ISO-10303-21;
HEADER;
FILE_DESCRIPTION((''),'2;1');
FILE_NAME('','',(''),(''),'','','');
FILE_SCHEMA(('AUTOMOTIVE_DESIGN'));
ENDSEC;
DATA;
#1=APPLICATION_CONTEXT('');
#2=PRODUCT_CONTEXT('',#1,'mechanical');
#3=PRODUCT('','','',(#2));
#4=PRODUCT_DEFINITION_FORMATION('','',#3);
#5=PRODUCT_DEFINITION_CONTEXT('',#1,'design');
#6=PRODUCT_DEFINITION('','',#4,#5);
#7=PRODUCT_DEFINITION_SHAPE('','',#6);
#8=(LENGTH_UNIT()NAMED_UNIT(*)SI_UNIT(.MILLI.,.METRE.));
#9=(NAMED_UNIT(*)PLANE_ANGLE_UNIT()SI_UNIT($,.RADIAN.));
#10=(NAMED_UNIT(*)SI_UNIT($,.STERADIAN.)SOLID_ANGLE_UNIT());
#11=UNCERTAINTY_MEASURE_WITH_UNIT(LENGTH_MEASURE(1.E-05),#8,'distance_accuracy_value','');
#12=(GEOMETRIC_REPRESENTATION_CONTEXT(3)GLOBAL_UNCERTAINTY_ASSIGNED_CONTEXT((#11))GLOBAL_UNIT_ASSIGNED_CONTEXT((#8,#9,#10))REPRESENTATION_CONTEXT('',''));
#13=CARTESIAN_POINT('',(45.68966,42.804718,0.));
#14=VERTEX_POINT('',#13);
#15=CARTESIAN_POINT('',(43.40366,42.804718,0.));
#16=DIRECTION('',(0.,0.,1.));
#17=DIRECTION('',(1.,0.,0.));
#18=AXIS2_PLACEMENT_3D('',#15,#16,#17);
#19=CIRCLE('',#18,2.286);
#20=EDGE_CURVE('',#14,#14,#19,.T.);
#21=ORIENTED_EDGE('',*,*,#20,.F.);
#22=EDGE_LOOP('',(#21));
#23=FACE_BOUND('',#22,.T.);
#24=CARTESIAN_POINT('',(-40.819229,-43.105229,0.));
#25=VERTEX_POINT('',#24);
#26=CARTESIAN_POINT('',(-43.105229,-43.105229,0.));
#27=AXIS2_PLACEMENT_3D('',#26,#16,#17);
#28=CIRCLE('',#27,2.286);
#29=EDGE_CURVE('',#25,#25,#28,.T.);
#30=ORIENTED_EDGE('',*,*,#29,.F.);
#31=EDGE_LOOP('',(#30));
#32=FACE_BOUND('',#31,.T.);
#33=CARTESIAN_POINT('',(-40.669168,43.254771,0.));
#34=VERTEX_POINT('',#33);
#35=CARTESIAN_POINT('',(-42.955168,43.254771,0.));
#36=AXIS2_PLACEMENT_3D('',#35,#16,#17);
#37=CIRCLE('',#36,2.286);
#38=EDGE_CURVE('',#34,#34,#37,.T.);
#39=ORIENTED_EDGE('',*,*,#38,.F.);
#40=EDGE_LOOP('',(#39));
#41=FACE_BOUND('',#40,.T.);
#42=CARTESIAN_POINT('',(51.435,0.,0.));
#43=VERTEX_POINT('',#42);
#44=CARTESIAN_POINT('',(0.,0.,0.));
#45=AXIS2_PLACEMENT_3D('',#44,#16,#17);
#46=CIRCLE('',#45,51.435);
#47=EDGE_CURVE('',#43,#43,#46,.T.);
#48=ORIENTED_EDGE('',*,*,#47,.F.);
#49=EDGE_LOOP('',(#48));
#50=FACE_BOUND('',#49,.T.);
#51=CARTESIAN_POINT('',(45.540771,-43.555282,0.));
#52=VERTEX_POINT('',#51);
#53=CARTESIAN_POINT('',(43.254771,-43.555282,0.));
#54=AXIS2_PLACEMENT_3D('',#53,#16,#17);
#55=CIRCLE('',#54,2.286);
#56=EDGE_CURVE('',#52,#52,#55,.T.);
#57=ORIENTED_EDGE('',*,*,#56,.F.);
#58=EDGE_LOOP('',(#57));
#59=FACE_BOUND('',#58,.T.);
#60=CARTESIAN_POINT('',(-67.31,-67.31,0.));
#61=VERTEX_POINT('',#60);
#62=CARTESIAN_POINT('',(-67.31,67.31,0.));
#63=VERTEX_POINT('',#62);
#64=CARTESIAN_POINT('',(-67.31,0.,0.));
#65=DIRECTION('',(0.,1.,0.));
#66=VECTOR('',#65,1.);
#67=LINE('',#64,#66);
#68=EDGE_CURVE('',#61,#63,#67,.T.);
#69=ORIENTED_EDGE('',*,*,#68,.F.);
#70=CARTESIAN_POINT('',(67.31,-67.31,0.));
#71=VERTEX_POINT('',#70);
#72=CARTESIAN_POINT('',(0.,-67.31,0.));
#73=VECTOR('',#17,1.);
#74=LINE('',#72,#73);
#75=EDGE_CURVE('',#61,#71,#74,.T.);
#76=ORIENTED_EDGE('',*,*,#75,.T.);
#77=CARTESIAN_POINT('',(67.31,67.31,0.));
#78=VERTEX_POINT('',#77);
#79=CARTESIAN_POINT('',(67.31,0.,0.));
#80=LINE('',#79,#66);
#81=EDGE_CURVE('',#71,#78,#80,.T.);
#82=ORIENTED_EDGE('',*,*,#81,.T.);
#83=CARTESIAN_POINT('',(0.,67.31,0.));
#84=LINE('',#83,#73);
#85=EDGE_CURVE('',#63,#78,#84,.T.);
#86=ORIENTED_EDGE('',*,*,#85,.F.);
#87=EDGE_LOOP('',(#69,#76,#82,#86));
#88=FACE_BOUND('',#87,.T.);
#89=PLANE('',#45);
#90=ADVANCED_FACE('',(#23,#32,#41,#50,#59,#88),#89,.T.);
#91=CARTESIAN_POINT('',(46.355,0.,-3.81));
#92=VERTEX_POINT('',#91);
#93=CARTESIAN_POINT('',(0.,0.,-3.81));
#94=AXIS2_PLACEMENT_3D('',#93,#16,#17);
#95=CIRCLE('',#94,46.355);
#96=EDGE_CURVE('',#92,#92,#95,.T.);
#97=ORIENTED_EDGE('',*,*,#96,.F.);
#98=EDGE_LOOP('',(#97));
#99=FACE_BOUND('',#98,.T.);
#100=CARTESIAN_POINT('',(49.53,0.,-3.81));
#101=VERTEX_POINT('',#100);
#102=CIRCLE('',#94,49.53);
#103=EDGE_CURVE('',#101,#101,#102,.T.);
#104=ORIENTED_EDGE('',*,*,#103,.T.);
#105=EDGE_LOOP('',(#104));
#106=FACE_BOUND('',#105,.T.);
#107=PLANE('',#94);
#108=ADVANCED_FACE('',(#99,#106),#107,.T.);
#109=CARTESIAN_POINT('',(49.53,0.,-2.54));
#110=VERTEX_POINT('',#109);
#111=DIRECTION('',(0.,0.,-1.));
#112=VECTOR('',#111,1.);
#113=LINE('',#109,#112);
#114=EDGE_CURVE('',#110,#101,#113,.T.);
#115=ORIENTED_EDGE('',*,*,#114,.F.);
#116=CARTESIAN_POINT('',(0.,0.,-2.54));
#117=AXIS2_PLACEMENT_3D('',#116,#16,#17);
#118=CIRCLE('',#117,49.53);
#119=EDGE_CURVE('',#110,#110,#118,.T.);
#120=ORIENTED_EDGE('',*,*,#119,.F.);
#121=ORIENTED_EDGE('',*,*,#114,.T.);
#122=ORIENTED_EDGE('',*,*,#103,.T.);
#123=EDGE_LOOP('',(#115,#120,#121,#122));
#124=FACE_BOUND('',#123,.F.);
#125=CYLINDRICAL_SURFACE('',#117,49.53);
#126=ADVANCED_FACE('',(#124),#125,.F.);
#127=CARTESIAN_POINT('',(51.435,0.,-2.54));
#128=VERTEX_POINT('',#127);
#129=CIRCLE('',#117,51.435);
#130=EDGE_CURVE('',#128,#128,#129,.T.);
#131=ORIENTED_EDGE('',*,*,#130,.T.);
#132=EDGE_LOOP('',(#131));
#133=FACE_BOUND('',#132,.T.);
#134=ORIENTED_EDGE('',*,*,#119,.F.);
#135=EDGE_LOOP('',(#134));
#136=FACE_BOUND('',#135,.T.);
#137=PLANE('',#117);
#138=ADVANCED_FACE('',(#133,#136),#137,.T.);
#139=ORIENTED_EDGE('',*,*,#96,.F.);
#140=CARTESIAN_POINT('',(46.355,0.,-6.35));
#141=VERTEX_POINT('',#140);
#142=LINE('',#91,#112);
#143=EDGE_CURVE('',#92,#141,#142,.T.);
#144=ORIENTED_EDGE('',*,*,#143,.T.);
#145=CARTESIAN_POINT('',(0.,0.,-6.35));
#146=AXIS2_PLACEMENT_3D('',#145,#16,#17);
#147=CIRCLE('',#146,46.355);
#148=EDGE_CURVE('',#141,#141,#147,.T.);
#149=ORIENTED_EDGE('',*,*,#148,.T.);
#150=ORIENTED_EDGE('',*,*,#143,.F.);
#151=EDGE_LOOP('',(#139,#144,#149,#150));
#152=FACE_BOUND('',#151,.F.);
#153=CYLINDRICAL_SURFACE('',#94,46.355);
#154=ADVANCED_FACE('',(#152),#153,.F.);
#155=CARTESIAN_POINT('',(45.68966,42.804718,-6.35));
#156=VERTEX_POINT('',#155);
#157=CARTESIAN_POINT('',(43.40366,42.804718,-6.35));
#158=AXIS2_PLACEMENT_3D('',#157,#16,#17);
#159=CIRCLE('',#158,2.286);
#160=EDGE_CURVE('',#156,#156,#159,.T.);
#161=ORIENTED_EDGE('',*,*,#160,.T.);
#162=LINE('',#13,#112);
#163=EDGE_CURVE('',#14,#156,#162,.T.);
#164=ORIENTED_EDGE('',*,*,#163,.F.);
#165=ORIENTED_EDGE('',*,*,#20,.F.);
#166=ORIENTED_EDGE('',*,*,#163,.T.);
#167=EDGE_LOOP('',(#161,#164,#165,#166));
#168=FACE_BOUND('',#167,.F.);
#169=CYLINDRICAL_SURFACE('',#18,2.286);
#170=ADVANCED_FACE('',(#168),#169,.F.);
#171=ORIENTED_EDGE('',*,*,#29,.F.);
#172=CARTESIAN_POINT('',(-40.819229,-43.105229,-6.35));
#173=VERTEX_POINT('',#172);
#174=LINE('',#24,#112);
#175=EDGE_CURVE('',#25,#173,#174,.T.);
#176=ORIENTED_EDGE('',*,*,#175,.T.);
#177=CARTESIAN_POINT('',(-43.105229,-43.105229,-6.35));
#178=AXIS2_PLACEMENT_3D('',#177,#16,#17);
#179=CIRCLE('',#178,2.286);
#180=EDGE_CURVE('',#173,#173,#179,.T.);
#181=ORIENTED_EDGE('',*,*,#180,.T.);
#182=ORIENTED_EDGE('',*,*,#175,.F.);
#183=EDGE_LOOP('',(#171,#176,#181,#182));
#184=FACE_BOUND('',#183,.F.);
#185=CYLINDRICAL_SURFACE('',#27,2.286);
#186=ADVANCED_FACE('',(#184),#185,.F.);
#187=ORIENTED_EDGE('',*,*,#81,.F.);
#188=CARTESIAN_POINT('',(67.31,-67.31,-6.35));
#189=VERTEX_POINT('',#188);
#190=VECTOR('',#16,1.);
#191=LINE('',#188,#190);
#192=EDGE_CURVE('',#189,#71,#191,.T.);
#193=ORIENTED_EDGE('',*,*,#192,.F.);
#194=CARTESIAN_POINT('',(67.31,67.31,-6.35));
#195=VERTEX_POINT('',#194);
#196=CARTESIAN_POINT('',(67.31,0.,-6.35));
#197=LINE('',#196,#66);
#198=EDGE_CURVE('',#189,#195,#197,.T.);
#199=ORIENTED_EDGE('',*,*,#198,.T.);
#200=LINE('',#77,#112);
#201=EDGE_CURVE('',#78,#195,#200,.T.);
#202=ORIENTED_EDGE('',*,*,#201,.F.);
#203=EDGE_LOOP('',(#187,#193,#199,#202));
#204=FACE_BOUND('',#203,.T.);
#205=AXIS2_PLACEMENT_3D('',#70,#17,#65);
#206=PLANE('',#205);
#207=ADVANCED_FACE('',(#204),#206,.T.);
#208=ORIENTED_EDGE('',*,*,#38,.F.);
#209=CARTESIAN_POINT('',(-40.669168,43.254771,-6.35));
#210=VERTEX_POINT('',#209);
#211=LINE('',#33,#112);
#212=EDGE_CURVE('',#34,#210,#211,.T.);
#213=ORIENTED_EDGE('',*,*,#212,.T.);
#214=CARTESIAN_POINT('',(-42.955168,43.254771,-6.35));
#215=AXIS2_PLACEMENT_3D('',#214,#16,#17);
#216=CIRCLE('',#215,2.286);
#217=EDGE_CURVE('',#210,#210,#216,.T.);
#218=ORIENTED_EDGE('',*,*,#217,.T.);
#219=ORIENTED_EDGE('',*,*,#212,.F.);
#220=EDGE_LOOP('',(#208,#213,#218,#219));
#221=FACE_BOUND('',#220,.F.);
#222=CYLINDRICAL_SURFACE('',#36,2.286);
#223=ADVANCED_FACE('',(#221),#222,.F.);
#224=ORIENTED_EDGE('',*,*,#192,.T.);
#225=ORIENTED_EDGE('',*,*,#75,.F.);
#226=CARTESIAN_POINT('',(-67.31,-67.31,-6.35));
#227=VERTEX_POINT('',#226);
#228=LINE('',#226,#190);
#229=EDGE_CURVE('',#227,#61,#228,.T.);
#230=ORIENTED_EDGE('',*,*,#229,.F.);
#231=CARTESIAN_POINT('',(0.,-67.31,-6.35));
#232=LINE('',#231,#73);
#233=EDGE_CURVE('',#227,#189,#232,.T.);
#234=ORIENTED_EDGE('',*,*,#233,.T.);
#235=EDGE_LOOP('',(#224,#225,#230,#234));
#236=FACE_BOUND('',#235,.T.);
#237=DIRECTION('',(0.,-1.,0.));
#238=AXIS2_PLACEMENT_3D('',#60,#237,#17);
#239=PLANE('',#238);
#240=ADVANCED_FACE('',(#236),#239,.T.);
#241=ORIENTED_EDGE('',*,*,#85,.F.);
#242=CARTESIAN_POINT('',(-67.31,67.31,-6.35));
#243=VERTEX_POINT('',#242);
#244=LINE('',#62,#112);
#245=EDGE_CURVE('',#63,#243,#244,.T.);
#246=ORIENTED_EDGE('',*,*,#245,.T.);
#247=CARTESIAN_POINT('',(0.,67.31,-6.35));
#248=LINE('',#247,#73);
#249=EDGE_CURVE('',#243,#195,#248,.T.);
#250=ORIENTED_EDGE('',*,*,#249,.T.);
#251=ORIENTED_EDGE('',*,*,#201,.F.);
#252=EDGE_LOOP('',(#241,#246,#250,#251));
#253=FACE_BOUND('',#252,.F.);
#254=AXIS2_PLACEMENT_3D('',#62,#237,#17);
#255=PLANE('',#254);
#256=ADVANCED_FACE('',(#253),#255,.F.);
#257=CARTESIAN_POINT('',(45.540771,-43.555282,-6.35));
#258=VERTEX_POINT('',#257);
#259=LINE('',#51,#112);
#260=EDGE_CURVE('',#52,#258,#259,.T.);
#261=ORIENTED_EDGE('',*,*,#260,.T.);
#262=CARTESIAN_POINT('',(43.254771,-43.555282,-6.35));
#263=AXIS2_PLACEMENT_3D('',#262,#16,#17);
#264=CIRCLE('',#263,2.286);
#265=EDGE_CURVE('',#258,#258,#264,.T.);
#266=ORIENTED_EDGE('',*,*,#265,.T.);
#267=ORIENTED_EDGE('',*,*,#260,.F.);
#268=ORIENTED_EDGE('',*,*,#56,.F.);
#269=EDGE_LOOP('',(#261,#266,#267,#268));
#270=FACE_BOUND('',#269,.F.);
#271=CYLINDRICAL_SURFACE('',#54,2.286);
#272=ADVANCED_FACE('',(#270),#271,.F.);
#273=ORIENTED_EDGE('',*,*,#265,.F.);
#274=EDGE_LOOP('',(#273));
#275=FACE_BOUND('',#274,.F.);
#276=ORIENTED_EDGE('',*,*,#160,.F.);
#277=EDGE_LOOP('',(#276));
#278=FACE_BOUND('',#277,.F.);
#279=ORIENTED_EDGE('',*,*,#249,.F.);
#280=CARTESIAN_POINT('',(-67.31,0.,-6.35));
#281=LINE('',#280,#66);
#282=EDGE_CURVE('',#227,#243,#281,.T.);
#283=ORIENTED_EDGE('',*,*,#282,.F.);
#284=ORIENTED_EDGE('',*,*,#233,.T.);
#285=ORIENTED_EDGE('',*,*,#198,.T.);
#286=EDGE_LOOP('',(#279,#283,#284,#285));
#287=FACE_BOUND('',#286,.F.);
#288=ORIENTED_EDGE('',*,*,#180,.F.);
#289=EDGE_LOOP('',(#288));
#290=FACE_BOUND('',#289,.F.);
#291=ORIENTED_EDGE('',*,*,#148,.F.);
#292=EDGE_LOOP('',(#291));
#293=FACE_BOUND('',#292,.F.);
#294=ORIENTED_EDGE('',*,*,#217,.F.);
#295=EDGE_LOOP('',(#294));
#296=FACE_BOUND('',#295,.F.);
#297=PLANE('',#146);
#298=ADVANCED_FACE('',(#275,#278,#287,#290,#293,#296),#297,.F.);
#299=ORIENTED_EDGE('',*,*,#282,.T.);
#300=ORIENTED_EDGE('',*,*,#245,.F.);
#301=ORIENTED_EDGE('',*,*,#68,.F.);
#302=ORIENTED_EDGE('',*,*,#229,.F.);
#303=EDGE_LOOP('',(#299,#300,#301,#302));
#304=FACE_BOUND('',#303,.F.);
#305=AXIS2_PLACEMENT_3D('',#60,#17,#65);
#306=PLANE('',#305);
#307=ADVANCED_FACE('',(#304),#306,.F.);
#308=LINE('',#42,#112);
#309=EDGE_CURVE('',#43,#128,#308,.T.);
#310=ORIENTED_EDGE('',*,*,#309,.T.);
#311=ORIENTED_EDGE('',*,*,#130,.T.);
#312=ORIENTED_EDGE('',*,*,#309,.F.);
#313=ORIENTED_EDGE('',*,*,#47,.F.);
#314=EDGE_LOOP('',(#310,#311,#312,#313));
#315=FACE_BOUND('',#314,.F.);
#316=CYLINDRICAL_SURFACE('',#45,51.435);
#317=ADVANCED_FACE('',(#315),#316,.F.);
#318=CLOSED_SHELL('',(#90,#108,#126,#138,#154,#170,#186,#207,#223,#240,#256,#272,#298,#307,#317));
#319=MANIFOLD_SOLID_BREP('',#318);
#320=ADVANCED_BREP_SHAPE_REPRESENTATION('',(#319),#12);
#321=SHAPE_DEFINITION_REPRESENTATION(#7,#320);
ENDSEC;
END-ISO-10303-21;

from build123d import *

# Parameters (mm, degrees)
F0_W     = 134.62
F0_H     = 134.62
F0_R     = 2.286
F0_R_2   = 51.435
F4_DEPTH = 6.35
F2_W     = 134.62
F2_H     = 134.62
F2_R     = 2.286
F2_R_2   = 49.53
F7_DEPTH = 3.81
F6_W     = 134.62
F6_H     = 134.62
F6_R     = 2.286
F6_R_2   = 46.355
F8_DEPTH = 2.54


# Not quite as in the source:
# - the program builds the solid bodies; features that only make, move or delete a surface that nothing else refers to are left out


with BuildPart() as f4:
    # F0 (on Top) → F4 (new body)
    with BuildSketch(Plane.XY):
        Rectangle(F0_W, F0_H)
        with Locations((-43.1052293811, -43.1052293811)):
            Circle(F0_R, mode=Mode.SUBTRACT)
        with Locations((43.2547706189, -43.5552815736)):
            Circle(F0_R, mode=Mode.SUBTRACT)
        with Locations((-42.9551675437, 43.2547706189)):
            Circle(F0_R, mode=Mode.SUBTRACT)
        Circle(F0_R_2, mode=Mode.SUBTRACT)
        with Locations((43.4036597586, 42.8047184264)):
            Circle(F0_R, mode=Mode.SUBTRACT)
    extrude(amount=-F4_DEPTH)

    # F2 (on offset) → F7 (join)
    with BuildSketch(Plane.XY.offset(-2.54)):
        Rectangle(F2_W, F2_H)
        with Locations((-43.1052293811, -43.1052293811)):
            Circle(F2_R, mode=Mode.SUBTRACT)
        with Locations((43.2547706189, -43.5552815736)):
            Circle(F2_R, mode=Mode.SUBTRACT)
        with Locations((-42.9551675437, 43.2547706189)):
            Circle(F2_R, mode=Mode.SUBTRACT)
        Circle(F2_R_2, mode=Mode.SUBTRACT)
        with Locations((43.4036597586, 42.8047184264)):
            Circle(F2_R, mode=Mode.SUBTRACT)
    extrude(amount=-F7_DEPTH)

    # F6 (on offset) → F8 (join)
    with BuildSketch(Plane.XY.offset(-3.81)):
        Rectangle(F6_W, F6_H)
        with Locations((-43.1052293811, -43.1052293811)):
            Circle(F6_R, mode=Mode.SUBTRACT)
        with Locations((43.2547706189, -43.5552815736)):
            Circle(F6_R, mode=Mode.SUBTRACT)
        with Locations((-42.9551675437, 43.2547706189)):
            Circle(F6_R, mode=Mode.SUBTRACT)
        Circle(F6_R_2, mode=Mode.SUBTRACT)
        with Locations((43.4036597586, 42.8047184264)):
            Circle(F6_R, mode=Mode.SUBTRACT)
    extrude(amount=-F8_DEPTH)


solid = f4.part
